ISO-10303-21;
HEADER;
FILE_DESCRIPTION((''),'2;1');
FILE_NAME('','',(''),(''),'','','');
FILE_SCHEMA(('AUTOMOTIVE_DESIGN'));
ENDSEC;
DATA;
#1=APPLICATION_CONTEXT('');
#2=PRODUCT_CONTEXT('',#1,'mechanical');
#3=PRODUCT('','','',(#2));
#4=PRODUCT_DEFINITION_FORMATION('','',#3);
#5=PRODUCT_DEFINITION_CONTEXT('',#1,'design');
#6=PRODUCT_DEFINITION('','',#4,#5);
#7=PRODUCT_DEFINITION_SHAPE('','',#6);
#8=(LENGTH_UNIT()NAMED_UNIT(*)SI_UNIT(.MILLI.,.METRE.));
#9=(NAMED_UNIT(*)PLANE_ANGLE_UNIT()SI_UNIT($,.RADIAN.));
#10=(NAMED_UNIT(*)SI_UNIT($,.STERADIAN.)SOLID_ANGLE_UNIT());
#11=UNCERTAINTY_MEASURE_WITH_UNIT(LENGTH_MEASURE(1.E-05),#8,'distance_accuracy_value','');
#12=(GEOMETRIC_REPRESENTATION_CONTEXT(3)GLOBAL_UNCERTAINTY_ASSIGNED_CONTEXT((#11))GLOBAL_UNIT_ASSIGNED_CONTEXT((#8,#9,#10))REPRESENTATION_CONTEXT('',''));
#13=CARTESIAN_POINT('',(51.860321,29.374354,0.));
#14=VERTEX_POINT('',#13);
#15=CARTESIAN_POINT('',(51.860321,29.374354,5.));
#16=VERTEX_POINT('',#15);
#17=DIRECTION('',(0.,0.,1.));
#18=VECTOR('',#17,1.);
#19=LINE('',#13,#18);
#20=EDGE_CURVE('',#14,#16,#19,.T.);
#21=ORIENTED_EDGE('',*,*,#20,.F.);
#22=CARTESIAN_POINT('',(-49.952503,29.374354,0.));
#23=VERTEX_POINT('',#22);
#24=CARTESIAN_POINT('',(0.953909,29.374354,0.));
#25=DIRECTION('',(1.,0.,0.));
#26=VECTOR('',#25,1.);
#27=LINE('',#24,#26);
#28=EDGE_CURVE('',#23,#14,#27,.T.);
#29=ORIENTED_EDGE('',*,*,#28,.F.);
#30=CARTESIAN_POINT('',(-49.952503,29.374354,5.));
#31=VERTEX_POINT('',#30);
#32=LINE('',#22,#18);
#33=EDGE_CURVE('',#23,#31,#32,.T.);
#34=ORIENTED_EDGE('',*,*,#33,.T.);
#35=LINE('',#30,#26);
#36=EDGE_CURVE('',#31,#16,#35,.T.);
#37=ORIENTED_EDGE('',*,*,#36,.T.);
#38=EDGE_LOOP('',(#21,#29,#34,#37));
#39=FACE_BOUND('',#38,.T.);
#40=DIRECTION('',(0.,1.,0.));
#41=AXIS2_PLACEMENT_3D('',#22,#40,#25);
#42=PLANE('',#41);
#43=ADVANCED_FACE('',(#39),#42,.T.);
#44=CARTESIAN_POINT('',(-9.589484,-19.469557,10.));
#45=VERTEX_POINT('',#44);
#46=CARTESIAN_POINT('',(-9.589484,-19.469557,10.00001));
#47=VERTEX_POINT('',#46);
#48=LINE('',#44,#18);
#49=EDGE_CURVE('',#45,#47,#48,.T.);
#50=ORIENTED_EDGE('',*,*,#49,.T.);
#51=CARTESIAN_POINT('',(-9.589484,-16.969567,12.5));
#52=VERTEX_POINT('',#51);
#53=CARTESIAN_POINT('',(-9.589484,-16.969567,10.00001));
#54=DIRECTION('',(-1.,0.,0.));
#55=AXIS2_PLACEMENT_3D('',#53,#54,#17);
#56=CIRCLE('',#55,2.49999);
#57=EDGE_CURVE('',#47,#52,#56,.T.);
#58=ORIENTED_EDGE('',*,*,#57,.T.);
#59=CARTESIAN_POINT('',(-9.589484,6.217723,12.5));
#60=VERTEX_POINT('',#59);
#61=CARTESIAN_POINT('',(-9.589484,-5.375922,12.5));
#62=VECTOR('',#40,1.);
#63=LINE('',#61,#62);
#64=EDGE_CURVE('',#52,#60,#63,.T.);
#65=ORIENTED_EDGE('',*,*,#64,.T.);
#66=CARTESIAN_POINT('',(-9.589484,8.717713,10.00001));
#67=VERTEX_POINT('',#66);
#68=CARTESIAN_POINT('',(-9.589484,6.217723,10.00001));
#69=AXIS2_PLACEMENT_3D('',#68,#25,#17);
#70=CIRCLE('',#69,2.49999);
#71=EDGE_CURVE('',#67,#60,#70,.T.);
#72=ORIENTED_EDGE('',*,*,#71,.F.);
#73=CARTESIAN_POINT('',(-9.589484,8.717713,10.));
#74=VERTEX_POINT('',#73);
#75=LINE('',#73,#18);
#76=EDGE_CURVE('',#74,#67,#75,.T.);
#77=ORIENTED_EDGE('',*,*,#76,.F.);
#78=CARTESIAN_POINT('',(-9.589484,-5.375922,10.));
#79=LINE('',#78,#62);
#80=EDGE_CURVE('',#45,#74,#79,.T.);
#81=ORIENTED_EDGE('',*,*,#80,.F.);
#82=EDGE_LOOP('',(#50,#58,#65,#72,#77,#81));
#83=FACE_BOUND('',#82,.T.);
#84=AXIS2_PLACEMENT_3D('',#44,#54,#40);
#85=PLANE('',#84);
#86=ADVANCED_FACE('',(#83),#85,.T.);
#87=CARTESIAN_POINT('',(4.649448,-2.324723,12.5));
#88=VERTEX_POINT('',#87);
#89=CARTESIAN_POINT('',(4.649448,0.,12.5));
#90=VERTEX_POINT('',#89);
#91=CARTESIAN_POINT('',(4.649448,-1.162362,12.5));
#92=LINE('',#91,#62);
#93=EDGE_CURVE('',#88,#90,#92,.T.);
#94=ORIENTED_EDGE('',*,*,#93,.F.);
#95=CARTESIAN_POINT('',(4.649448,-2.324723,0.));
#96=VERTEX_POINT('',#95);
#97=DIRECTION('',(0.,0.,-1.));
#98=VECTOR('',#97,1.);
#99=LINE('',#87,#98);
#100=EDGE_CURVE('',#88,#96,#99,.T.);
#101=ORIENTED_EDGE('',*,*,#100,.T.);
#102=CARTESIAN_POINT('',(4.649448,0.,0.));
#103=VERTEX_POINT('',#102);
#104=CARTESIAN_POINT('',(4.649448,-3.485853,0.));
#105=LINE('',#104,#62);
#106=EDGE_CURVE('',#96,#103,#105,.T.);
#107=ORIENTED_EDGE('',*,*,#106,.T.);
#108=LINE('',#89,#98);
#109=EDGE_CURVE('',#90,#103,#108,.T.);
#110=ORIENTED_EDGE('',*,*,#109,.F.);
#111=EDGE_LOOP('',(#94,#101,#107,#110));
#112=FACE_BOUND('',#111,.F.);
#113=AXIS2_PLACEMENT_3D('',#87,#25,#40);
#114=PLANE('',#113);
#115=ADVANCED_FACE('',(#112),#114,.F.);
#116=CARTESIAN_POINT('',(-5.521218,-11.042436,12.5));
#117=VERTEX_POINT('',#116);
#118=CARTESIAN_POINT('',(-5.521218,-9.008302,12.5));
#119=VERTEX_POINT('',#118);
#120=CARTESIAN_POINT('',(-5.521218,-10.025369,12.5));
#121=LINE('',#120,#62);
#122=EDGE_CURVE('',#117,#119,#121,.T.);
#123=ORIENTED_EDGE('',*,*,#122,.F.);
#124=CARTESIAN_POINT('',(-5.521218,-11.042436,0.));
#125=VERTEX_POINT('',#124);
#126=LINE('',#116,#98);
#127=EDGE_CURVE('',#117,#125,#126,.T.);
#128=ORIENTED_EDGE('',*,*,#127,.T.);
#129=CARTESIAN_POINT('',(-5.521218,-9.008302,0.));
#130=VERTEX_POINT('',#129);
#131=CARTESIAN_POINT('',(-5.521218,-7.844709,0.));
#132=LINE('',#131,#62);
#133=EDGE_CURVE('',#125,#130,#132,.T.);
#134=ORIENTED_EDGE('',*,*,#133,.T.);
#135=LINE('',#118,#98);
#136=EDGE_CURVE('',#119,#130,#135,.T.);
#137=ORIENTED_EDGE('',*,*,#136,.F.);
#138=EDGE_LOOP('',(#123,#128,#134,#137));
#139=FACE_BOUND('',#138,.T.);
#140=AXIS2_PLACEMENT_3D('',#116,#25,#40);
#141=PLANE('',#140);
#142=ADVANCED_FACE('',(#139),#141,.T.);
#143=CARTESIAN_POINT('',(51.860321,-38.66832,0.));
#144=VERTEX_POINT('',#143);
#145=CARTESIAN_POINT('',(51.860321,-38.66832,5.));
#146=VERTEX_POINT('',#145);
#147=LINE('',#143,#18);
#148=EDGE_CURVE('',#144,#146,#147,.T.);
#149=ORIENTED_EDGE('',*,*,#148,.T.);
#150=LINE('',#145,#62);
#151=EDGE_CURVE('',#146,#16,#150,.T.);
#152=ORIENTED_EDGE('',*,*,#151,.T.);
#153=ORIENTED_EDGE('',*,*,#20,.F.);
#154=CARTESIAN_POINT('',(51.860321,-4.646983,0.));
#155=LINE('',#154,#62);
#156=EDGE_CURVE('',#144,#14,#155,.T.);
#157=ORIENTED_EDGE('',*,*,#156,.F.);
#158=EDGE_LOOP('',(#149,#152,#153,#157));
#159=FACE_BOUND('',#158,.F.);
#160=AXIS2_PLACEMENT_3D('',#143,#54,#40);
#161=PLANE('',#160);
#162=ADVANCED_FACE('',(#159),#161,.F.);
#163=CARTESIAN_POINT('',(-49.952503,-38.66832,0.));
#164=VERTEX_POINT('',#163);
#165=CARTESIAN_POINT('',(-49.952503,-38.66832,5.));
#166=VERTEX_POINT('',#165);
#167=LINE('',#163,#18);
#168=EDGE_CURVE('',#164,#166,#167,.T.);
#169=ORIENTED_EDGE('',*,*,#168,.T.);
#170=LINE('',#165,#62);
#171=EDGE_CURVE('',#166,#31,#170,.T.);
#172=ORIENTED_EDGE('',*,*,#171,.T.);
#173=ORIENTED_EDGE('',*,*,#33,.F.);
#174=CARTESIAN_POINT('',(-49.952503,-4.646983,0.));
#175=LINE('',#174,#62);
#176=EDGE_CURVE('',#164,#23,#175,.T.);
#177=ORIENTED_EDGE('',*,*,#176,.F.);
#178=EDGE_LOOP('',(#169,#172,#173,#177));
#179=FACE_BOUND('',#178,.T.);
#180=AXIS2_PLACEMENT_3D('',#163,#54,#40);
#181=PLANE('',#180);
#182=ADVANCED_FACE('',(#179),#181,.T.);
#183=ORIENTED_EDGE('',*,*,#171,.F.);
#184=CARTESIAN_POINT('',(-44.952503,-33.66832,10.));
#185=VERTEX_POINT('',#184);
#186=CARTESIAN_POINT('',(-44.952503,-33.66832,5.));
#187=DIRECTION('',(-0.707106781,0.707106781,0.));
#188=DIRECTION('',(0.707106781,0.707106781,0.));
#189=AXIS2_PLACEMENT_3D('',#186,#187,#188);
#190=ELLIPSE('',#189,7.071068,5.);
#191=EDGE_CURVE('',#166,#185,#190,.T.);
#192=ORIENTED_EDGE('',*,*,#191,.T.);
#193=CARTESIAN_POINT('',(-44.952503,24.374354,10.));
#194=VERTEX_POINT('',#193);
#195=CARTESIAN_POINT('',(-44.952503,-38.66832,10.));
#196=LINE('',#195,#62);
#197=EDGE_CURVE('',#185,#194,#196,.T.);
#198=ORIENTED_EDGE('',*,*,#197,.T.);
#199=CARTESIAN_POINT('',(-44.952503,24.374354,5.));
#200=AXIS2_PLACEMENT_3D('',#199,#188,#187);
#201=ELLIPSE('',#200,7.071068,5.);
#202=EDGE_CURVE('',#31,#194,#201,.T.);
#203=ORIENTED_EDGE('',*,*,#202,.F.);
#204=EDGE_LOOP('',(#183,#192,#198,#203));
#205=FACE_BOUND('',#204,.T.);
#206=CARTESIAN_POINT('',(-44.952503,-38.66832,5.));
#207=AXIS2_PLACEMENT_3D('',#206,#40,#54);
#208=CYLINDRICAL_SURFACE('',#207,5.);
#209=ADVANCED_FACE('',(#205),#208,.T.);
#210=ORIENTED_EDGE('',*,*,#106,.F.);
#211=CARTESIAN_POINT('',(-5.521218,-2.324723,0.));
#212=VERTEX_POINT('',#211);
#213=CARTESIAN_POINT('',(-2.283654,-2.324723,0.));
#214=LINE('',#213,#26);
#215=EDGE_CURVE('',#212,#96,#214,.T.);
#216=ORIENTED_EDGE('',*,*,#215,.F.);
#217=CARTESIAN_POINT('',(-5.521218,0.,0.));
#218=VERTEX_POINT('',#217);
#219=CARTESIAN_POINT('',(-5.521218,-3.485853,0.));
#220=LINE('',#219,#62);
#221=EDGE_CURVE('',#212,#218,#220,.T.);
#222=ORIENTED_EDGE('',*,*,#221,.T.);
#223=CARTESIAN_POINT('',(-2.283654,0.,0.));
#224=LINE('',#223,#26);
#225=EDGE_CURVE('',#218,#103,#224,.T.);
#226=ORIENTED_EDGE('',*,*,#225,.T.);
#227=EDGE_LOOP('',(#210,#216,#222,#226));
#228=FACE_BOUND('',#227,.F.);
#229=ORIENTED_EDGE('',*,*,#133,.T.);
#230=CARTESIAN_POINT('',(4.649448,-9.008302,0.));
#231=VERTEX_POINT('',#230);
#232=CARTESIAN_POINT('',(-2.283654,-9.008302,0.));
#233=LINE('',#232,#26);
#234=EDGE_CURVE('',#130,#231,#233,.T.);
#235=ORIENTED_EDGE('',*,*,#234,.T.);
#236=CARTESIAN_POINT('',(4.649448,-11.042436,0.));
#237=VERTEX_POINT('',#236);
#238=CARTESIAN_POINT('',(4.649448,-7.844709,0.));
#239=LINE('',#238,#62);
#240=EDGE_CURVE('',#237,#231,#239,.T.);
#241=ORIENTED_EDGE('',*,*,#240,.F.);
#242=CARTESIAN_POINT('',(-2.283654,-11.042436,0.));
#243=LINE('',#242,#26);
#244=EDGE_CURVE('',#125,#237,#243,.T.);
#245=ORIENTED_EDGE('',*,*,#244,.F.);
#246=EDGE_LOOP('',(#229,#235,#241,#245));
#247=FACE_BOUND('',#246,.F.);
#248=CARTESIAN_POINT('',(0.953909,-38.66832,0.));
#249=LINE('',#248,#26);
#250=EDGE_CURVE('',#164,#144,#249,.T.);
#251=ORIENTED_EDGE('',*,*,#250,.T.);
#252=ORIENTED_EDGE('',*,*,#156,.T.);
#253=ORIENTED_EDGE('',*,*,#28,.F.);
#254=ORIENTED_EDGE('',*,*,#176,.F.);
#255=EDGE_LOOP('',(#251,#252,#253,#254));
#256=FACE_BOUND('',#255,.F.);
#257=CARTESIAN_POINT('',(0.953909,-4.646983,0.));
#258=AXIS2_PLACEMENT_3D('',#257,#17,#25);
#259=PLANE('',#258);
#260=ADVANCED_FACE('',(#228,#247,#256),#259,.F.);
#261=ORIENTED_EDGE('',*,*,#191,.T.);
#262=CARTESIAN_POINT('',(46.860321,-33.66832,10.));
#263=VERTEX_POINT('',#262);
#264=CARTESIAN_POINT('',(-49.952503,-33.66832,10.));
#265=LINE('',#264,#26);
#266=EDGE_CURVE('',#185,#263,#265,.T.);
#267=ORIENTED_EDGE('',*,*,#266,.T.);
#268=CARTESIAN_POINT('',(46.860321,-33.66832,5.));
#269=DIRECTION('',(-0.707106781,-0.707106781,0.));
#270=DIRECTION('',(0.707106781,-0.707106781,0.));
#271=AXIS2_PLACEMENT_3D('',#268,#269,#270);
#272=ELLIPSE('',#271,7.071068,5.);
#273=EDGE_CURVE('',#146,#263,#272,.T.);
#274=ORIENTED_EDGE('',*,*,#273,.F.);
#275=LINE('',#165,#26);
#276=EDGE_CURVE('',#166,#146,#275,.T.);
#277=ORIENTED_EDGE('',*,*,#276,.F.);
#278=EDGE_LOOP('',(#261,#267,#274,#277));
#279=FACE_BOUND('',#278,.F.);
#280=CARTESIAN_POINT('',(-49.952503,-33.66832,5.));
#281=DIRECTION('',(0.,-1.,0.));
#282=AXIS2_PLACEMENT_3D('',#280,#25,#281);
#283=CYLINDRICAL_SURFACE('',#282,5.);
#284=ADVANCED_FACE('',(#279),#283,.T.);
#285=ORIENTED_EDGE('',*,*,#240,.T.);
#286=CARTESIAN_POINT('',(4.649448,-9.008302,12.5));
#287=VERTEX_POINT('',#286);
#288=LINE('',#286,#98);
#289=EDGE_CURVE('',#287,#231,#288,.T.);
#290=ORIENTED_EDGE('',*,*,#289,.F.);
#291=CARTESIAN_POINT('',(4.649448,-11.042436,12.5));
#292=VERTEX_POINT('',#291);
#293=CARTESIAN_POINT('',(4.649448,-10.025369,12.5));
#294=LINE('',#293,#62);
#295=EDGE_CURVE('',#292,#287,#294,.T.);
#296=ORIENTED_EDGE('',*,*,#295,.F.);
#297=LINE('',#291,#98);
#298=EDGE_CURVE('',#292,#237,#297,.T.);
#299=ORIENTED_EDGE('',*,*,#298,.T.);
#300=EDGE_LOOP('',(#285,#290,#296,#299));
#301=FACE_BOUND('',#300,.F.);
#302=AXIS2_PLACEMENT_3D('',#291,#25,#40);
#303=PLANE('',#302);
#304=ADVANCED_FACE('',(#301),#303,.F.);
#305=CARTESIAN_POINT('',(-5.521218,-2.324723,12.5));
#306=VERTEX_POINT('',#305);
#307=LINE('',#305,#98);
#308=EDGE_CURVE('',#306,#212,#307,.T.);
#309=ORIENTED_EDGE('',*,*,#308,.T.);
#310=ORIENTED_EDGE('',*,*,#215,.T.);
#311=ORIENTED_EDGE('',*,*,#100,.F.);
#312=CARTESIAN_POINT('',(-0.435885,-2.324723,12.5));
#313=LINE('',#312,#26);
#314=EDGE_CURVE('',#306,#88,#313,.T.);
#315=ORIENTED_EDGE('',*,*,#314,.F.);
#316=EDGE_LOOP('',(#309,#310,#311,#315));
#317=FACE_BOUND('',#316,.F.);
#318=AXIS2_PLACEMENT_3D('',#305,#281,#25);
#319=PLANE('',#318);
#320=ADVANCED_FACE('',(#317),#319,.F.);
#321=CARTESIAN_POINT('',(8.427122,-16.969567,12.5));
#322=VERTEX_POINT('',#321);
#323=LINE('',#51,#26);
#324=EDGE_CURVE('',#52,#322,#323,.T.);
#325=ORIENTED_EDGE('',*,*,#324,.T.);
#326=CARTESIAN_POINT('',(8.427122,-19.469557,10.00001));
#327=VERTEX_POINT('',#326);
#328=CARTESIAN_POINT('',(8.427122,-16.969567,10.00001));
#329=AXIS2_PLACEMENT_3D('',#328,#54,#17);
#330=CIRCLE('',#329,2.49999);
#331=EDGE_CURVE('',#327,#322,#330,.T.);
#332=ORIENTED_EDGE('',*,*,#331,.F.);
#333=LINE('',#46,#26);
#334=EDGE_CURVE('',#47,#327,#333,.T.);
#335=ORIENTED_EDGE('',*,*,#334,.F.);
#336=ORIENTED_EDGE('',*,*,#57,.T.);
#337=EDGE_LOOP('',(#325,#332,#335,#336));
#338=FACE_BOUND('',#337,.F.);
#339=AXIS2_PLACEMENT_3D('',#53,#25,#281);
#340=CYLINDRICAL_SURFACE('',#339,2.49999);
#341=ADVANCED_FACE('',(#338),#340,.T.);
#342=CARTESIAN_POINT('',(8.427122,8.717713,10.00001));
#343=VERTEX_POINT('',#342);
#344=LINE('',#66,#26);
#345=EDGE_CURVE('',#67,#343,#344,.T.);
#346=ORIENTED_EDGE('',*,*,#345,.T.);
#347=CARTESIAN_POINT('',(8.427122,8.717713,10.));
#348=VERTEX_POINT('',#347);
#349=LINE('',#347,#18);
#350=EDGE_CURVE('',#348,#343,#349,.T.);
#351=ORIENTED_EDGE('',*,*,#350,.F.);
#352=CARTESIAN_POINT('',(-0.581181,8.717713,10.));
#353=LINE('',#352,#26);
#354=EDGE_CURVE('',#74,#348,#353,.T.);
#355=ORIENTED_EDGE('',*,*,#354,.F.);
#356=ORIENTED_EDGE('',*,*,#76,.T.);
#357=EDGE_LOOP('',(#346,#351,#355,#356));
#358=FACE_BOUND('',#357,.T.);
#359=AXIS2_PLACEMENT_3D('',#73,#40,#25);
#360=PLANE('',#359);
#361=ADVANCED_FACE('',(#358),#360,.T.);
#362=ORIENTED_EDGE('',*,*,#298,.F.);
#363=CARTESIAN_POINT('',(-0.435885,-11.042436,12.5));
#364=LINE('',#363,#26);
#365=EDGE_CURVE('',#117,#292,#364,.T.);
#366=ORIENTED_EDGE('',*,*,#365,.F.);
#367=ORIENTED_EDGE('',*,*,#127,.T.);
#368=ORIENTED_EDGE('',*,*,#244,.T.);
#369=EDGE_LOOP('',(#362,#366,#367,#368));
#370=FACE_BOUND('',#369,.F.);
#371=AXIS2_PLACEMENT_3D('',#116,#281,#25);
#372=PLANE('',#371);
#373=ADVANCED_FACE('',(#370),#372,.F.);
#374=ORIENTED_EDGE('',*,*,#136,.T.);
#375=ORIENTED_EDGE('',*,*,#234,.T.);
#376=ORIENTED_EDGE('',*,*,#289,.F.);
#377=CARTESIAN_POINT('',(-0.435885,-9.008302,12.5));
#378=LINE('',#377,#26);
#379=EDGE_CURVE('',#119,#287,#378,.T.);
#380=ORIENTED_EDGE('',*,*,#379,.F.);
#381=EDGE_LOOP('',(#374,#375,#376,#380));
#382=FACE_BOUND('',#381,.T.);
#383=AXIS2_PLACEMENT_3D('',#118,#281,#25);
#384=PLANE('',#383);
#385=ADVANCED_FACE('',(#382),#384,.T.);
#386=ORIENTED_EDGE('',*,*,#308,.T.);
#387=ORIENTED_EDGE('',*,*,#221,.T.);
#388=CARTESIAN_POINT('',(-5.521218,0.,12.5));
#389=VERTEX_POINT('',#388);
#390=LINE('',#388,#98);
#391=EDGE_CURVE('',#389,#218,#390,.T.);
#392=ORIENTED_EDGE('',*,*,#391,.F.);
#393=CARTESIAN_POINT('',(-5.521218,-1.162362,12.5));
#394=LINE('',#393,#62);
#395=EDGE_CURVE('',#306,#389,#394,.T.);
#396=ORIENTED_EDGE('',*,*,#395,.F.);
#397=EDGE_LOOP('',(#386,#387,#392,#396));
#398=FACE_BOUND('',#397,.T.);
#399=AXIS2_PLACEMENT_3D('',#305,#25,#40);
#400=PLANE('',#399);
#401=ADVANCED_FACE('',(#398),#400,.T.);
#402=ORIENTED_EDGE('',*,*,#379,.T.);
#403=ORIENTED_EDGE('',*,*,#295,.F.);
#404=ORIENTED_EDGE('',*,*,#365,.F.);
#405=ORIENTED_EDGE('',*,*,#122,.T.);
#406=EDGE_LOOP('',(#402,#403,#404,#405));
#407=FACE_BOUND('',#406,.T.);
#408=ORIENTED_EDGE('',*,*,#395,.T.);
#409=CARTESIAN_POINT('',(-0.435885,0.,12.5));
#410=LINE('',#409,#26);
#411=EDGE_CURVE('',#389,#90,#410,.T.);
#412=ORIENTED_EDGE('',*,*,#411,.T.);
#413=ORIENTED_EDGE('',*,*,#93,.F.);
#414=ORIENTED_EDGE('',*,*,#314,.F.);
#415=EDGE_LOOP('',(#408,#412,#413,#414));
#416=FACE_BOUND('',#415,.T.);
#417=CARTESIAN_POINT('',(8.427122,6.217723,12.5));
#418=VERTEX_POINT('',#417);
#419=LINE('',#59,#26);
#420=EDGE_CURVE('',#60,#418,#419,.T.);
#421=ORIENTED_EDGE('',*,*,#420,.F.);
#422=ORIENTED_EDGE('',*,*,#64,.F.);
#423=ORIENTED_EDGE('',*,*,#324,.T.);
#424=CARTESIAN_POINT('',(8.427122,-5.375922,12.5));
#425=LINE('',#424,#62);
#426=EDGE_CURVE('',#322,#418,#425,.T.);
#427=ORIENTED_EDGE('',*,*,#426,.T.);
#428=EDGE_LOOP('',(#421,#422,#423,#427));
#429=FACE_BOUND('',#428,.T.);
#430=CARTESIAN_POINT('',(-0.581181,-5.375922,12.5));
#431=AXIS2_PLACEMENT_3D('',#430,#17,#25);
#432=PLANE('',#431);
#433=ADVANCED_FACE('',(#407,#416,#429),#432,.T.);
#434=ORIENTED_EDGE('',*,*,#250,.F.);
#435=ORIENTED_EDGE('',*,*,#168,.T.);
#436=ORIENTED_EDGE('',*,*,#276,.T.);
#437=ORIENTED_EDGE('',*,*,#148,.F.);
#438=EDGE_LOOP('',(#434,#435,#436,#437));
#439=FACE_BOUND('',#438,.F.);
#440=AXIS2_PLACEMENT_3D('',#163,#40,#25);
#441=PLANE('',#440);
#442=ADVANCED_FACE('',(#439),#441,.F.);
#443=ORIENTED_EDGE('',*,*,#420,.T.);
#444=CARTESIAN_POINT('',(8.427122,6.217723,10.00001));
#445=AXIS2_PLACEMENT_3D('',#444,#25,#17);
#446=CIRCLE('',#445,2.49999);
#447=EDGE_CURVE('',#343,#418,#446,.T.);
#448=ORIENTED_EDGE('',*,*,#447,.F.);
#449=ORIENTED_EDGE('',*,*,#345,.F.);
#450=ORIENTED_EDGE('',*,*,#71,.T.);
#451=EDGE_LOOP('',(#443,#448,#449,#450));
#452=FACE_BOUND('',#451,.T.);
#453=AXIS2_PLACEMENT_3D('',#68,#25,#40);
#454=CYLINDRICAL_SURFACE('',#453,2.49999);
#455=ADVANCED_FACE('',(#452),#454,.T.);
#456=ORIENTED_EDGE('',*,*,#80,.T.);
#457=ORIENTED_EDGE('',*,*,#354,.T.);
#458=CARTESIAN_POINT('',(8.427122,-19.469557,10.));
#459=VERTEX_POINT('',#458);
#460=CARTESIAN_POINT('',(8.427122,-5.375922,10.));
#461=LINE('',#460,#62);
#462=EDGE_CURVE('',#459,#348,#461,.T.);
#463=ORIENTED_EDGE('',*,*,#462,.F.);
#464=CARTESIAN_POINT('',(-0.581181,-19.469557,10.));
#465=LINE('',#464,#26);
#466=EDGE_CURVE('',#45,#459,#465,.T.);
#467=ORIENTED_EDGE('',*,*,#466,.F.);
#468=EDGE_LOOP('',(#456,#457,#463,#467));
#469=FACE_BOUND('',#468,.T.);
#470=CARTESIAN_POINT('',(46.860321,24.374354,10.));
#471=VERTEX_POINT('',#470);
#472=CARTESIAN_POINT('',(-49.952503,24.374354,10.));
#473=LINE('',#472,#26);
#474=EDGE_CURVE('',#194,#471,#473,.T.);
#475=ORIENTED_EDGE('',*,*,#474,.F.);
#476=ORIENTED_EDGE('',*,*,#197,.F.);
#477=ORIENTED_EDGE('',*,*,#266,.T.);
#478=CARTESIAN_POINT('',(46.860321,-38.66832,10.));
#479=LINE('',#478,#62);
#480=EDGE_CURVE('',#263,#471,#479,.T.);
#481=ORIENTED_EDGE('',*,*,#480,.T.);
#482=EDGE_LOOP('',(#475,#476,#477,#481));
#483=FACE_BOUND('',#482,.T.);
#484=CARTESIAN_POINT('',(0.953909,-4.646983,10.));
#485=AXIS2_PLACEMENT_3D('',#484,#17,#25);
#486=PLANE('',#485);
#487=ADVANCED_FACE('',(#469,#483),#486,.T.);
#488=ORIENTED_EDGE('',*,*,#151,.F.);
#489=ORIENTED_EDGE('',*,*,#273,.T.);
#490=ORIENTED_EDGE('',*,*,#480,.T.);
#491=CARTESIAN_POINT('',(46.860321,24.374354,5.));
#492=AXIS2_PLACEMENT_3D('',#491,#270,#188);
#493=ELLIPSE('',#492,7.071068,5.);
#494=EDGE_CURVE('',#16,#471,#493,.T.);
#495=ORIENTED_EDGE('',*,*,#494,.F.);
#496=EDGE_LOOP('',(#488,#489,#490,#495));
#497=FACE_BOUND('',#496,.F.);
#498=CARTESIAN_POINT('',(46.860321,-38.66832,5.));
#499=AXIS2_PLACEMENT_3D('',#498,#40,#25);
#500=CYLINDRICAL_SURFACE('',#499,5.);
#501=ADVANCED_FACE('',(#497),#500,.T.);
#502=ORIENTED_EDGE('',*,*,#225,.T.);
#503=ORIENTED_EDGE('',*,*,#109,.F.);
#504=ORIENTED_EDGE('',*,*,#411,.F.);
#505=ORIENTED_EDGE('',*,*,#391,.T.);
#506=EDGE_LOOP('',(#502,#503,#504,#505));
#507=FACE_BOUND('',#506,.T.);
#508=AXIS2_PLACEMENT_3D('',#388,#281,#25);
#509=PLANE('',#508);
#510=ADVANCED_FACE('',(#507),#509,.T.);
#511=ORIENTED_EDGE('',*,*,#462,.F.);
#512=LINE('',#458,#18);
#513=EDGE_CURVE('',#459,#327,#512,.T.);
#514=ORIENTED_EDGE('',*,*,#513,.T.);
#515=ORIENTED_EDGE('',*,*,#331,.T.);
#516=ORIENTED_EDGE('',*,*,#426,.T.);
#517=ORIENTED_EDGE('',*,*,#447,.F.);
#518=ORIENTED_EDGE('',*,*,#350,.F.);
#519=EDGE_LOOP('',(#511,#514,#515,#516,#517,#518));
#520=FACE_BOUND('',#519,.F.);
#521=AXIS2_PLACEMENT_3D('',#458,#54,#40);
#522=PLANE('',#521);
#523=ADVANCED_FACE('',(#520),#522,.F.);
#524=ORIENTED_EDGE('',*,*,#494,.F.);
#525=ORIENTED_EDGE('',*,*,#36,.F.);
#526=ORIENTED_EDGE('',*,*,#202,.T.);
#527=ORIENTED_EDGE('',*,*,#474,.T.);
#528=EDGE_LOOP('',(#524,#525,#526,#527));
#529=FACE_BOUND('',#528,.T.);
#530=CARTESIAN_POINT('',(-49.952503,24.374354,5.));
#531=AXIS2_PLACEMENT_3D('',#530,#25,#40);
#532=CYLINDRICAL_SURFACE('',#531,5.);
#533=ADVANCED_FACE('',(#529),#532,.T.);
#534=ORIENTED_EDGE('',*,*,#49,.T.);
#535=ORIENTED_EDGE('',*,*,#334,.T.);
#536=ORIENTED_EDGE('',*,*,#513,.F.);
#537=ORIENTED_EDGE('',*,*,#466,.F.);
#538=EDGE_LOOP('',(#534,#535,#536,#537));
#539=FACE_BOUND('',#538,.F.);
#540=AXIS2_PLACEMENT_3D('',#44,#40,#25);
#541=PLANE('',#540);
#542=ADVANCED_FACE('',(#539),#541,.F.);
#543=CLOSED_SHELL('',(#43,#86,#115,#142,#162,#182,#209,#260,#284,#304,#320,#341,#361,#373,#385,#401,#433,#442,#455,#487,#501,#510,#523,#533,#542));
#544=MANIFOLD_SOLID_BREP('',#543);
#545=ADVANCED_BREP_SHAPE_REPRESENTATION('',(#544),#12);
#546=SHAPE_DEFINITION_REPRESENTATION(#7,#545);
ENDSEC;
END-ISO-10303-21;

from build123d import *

# Parameters (mm, degrees)
F0_W     = 101.8128246069
F0_H     = 68.0426731706
F1_DEPTH = 10
F2_R     = 5
F3_W     = 18.016605638
F3_H     = 28.1872702762
F4_DEPTH = 2.5
F5_W     = 10.1706655696
F5_H     = 2.0341333002
F5_H_2   = 2.3247234058
F6_DEPTH = 25
F7_R     = 2.49999


# Not quite as in the source:
# - a fillet or chamfer is up to 0.001 mm smaller than in the source, because OpenCascade refuses the exact size


with BuildPart() as f1:
    # F0 (on Top) → F1 (new body)
    with BuildSketch(Plane.XY):
        with Locations((0.9539090097, -4.6469829977)):
            Rectangle(F0_W, F0_H)
    extrude(amount=F1_DEPTH)

    # F2
    f2_edges = [f1.edges().sort_by_distance(p)[0] for p in [
        (-49.952503, -4.646983, 10),
        (0.953909, 29.374354, 10),
        (0.953909, -38.66832, 10),
        (51.860321, -4.646983, 10),
    ]]
    fillet(f2_edges, radius=F2_R)

    # F3 (on face) → F4 (join)
    with BuildSketch(Plane.XY.offset(10)):
        with Locations((-0.5811811425, -5.3759221919)):
            Rectangle(F3_W, F3_H)
    extrude(amount=F4_DEPTH)

    # F5 (on face) → F6 (cut)
    with BuildSketch(Plane.XY.offset(12.5)):
        with Locations((-0.435885042, -10.0253690034)):
            Rectangle(F5_W, F5_H)
        with Locations((-0.435885042, -1.1623617029)):
            Rectangle(F5_W, F5_H_2)
    extrude(amount=-F6_DEPTH, mode=Mode.SUBTRACT)

    # F7 (radius 2.5 in the source; OpenCascade refuses exactly that, so slightly less here)
    f7_edges = [f1.edges().sort_by_distance(p)[0] for p in [
        (-0.581181, -19.469557, 12.5),
        (-0.581181, 8.717713, 12.5),
    ]]
    fillet(f7_edges, radius=F7_R)


solid = f1.part
